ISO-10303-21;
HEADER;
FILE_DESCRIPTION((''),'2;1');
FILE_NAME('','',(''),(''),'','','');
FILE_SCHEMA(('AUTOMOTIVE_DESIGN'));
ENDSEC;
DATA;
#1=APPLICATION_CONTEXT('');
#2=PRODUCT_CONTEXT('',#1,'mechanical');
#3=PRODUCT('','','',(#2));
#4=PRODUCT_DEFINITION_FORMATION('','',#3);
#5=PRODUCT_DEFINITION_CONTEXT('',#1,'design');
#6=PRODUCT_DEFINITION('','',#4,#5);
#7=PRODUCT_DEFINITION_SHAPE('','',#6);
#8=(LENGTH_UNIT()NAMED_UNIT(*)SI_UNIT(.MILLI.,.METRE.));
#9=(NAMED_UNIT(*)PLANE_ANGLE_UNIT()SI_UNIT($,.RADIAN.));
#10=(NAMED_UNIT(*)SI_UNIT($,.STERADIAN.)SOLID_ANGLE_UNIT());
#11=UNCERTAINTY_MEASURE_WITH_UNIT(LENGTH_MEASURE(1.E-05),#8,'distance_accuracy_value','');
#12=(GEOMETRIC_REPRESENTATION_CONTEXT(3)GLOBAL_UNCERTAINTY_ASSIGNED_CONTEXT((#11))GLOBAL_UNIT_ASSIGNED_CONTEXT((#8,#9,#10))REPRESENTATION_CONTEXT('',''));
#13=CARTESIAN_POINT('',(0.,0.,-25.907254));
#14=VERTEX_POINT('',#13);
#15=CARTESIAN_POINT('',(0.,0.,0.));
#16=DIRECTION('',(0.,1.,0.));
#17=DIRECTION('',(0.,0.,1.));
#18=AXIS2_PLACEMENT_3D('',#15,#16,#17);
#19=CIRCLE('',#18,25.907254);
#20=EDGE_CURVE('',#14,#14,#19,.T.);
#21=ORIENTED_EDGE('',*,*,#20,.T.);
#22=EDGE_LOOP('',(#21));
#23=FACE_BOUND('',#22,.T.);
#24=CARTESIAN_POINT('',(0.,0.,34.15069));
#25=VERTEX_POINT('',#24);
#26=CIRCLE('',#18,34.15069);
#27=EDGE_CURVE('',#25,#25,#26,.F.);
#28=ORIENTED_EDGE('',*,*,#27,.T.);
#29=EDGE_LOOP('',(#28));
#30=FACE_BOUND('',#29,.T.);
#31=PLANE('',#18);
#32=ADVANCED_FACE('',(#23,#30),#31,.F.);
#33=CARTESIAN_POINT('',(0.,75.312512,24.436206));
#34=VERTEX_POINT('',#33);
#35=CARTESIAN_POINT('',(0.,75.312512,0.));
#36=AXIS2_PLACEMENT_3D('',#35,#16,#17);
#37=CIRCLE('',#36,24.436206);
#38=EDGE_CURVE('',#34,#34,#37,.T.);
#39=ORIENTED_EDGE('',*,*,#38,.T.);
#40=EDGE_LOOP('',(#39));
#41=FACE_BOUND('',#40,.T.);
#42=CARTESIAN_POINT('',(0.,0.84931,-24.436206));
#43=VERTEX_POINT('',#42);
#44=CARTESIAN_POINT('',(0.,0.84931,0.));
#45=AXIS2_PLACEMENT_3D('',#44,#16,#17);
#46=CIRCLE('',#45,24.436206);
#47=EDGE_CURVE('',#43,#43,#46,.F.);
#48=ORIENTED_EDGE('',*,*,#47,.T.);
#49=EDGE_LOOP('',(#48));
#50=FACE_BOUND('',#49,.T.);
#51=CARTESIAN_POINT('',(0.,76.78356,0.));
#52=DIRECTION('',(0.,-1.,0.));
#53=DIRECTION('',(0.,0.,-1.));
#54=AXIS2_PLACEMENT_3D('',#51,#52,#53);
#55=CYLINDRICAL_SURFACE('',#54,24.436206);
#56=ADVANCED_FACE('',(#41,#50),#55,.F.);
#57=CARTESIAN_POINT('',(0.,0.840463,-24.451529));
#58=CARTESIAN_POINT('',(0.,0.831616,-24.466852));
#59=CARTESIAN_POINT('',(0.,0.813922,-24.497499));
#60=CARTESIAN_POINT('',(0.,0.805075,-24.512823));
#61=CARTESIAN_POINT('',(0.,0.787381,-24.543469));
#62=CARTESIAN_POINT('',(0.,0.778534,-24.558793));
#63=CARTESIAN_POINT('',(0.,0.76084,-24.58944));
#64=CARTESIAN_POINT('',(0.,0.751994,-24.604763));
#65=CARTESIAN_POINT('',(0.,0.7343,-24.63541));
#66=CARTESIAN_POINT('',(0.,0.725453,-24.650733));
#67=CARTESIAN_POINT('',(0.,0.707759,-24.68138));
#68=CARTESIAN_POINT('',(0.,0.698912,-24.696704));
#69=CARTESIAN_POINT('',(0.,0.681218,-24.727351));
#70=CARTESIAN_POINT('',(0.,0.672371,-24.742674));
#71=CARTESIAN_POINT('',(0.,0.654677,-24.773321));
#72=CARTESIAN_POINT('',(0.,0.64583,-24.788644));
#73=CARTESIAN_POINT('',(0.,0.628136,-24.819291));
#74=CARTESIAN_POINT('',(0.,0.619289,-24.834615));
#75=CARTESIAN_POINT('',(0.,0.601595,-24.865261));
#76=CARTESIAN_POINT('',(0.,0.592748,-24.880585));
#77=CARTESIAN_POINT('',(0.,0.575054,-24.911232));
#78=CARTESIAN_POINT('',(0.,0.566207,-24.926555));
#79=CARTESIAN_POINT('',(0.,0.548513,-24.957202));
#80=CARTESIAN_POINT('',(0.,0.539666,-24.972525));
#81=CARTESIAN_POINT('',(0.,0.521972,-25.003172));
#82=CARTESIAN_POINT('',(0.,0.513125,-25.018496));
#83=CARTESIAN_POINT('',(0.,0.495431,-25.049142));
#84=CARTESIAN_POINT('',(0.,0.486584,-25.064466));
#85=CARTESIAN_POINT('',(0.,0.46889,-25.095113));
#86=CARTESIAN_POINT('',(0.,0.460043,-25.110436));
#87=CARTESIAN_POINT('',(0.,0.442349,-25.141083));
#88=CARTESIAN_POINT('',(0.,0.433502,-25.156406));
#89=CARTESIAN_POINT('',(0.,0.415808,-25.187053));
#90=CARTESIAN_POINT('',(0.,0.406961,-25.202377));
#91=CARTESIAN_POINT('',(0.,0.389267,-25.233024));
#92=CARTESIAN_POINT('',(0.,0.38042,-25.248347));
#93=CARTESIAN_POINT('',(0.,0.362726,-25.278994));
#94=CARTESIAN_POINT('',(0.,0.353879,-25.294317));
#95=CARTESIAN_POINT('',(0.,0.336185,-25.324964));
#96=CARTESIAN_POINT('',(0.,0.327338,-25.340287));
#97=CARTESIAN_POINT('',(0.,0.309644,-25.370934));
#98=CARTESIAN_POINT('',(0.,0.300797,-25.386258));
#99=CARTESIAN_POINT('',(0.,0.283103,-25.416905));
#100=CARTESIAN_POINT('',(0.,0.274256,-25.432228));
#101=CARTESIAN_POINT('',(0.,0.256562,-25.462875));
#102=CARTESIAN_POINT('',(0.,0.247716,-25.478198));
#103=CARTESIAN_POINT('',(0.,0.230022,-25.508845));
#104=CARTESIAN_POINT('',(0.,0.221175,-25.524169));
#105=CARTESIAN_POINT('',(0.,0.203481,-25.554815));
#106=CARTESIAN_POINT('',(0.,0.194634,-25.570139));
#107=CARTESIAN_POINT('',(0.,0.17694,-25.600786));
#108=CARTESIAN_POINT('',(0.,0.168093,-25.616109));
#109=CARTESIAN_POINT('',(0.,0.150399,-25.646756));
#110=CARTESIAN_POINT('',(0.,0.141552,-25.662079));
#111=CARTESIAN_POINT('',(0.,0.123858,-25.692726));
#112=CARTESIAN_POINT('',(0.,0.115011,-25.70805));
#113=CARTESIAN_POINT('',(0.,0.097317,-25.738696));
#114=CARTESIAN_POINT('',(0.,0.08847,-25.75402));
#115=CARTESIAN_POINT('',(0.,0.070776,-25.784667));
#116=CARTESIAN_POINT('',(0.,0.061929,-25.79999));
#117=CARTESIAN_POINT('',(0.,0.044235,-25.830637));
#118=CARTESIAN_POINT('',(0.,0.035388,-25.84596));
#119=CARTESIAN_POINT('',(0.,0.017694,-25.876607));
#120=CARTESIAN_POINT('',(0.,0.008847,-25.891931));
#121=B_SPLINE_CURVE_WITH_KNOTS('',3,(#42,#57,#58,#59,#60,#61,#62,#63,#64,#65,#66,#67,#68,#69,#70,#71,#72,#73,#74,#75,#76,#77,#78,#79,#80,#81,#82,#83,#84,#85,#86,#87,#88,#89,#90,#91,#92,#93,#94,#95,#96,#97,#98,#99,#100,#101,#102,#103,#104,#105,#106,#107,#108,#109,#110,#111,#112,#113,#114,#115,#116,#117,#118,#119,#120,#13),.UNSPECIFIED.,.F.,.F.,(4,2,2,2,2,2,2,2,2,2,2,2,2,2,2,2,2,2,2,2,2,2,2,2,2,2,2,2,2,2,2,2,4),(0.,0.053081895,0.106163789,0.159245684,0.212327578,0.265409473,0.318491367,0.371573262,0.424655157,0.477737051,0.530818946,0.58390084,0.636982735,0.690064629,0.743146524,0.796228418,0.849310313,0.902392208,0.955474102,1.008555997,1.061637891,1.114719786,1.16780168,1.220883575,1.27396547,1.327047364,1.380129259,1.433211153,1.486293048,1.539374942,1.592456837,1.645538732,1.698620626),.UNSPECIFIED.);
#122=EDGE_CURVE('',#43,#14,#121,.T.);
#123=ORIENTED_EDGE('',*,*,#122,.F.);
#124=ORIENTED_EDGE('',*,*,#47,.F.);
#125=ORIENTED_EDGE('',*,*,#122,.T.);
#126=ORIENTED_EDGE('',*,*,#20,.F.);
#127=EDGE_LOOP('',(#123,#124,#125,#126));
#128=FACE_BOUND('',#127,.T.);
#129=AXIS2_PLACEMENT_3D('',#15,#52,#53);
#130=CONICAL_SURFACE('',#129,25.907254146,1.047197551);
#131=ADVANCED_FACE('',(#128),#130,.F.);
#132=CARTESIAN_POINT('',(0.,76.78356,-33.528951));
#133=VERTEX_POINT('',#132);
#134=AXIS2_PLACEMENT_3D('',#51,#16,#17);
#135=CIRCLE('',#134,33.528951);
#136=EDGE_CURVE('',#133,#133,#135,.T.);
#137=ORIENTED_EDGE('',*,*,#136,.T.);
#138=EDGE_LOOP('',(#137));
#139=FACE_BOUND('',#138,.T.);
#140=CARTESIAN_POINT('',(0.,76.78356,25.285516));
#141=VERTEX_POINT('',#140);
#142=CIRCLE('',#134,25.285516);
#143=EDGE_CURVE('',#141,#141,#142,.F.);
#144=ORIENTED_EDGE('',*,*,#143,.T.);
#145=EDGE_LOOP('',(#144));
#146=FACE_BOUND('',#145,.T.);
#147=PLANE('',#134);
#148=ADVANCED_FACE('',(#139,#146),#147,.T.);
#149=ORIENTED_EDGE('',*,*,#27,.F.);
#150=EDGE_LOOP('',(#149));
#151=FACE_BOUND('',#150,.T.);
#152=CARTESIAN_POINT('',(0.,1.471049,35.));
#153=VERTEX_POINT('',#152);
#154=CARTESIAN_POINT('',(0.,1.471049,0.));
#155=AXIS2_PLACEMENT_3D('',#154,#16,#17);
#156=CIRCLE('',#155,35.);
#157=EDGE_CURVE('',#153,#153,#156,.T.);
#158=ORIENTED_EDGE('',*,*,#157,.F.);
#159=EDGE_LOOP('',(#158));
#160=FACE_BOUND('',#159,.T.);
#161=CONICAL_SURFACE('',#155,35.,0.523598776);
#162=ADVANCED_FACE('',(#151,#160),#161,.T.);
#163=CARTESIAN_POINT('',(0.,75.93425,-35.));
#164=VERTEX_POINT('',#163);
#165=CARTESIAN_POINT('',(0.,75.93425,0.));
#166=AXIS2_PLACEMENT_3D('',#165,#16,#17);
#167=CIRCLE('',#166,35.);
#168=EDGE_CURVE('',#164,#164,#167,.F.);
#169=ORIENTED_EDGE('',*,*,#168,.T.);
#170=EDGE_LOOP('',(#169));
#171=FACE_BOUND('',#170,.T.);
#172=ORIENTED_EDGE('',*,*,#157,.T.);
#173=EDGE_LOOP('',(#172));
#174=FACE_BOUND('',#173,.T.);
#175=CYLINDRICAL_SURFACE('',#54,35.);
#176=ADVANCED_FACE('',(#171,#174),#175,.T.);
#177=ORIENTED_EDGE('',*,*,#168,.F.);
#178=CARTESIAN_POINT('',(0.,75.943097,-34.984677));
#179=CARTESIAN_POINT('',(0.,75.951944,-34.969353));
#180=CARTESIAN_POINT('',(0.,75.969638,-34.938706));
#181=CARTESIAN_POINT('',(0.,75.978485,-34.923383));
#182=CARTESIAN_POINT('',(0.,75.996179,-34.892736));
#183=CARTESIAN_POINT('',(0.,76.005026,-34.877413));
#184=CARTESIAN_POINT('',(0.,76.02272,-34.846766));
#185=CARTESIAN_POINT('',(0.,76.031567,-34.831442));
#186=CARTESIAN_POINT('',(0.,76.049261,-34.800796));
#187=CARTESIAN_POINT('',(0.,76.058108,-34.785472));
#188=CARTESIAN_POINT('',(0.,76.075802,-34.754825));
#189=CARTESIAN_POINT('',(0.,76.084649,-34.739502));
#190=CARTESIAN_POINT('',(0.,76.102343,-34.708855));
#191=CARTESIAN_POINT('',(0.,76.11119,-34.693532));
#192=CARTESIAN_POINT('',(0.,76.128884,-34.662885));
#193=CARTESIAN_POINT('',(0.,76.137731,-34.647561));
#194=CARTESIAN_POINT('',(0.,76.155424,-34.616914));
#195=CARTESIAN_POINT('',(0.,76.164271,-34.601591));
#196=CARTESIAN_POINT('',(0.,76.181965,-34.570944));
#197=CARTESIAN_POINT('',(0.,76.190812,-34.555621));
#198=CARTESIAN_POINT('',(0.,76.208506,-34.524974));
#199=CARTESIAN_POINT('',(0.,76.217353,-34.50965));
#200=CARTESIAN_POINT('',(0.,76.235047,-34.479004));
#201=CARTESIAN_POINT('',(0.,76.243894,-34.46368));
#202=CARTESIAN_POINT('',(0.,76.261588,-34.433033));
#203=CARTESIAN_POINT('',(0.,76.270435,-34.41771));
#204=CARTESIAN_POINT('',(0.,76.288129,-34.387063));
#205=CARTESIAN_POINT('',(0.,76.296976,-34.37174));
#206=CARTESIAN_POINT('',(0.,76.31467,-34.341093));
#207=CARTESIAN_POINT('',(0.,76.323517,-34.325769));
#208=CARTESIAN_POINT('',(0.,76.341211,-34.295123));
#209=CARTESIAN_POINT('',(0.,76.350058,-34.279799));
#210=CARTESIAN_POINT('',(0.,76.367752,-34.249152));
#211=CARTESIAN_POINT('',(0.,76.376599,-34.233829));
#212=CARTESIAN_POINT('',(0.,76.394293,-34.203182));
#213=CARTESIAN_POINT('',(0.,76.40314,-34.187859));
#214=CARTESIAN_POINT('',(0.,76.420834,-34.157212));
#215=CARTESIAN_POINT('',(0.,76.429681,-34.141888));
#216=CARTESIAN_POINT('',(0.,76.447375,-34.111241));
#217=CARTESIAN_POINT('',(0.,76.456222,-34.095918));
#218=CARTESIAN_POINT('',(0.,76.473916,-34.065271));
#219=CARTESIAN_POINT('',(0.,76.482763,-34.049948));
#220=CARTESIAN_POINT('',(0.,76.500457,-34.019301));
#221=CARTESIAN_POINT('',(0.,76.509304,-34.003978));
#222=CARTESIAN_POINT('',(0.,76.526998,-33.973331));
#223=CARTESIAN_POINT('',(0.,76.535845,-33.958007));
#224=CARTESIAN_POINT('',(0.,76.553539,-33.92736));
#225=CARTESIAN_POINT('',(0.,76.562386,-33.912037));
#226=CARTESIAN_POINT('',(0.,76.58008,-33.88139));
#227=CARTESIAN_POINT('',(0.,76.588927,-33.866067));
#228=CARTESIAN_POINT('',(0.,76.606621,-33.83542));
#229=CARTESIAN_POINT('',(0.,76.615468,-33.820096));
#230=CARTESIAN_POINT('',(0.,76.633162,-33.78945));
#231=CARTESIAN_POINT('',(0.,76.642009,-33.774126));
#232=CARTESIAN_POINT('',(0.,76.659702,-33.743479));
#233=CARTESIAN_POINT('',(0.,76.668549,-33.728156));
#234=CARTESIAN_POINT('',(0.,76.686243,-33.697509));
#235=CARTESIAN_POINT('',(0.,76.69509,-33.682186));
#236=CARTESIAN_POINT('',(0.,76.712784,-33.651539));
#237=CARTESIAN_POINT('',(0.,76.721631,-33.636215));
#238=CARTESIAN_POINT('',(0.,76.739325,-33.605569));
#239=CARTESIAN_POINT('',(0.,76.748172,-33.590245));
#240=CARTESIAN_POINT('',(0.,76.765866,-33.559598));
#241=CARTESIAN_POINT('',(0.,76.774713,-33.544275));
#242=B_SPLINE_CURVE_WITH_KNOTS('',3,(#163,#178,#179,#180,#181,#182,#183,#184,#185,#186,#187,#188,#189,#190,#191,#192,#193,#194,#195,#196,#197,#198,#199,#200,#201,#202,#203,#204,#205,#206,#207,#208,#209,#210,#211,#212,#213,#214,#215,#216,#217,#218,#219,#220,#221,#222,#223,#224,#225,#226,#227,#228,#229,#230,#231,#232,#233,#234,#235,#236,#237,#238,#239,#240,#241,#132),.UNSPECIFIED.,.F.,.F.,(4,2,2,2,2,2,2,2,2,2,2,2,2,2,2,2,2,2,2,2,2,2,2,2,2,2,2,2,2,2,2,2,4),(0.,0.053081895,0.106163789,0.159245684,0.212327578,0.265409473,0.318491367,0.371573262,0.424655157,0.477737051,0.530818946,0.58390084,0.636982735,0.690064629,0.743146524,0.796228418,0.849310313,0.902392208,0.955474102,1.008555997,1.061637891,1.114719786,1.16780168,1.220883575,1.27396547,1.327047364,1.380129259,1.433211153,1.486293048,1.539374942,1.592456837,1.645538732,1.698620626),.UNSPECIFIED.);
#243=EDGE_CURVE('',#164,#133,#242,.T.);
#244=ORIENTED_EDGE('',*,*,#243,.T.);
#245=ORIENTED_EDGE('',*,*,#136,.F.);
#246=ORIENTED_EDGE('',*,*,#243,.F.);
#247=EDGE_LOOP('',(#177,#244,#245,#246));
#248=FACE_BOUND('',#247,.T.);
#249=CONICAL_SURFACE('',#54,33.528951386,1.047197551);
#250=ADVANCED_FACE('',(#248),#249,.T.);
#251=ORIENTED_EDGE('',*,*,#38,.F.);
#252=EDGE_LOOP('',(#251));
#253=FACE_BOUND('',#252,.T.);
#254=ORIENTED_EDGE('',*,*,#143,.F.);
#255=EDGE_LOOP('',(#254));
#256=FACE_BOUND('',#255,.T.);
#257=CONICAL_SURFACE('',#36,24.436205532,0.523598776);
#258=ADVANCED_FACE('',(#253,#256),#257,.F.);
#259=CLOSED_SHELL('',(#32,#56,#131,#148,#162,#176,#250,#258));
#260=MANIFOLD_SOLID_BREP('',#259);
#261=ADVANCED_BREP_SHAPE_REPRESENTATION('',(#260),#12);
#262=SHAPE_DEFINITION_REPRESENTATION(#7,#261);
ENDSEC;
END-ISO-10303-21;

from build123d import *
from OCP.BRepFilletAPI import BRepFilletAPI_MakeChamfer

# Parameters (mm, degrees)
SKETCH1_R           = 35
BOSS_EXTRUDE1_DEPTH = 76.783560248
SKETCH2_R           = 24.436205532
CUT_EXTRUDE1_DEPTH  = 92.354885607
CHAMFER1_SIZE       = 0.849310313
CHAMFER1_SIZE2      = 1.471048614


with BuildPart() as part:
    # Sketch1 → Boss-Extrude1 (new body)
    with BuildSketch(Plane(origin=(0, 0, 0), x_dir=(1, 0, 0), z_dir=(0, 1, 0))):
        Circle(SKETCH1_R)
    extrude(amount=BOSS_EXTRUDE1_DEPTH)

    # Sketch2 → Cut-Extrude1 (cut, through all)
    with BuildSketch(Plane(origin=(0, 0, 0), x_dir=(1, 0, 0), z_dir=(0, 1, 0))):
        Circle(SKETCH2_R)
    extrude(amount=CUT_EXTRUDE1_DEPTH, mode=Mode.SUBTRACT)

    # Chamfer1: one chamfer whose edges measure the first distance from different faces: ONE call of the kernel's chamfer builder (chamfer() names one face for all edges)
    chamfer1_edges_1 = [part.edges().sort_by_distance(p)[0] for p in [
        (-24.436205532, 76.783560248, 0),
    ]]
    chamfer1_side_1 = [part.faces().sort_by_distance(p)[0] for p in [
        (-34.010050506, 76.783560248, 0),
    ]]
    chamfer1_edges_2 = [part.edges().sort_by_distance(p)[0] for p in [
        (-24.436205532, 0, 0),
    ]]
    chamfer1_side_2 = [part.faces().sort_by_distance(p)[0] for p in [
        (-24.436205532, 38.391780124, 0),
    ]]
    chamfer1_edges_3 = [part.edges().sort_by_distance(p)[0] for p in [
        (-35, 0, 0),
    ]]
    chamfer1_side_3 = [part.faces().sort_by_distance(p)[0] for p in [
        (-34.010050506, 0, 0),
    ]]
    chamfer1_edges_4 = [part.edges().sort_by_distance(p)[0] for p in [
        (-35, 76.783560248, 0),
    ]]
    chamfer1_side_4 = [part.faces().sort_by_distance(p)[0] for p in [
        (-35, 38.391780124, 0),
    ]]
    chamfer1 = BRepFilletAPI_MakeChamfer(part.part.solid().wrapped)
    for e in chamfer1_edges_1:
        chamfer1.Add(CHAMFER1_SIZE, CHAMFER1_SIZE2, e.wrapped, chamfer1_side_1[0].wrapped)  # the first distance lies on this face
    for e in chamfer1_edges_2:
        chamfer1.Add(CHAMFER1_SIZE, CHAMFER1_SIZE2, e.wrapped, chamfer1_side_2[0].wrapped)  # the first distance lies on this face
    for e in chamfer1_edges_3:
        chamfer1.Add(CHAMFER1_SIZE, CHAMFER1_SIZE2, e.wrapped, chamfer1_side_3[0].wrapped)  # the first distance lies on this face
    for e in chamfer1_edges_4:
        chamfer1.Add(CHAMFER1_SIZE, CHAMFER1_SIZE2, e.wrapped, chamfer1_side_4[0].wrapped)  # the first distance lies on this face
    add(Compound.cast(chamfer1.Shape()), mode=Mode.REPLACE)


solid = part.part
